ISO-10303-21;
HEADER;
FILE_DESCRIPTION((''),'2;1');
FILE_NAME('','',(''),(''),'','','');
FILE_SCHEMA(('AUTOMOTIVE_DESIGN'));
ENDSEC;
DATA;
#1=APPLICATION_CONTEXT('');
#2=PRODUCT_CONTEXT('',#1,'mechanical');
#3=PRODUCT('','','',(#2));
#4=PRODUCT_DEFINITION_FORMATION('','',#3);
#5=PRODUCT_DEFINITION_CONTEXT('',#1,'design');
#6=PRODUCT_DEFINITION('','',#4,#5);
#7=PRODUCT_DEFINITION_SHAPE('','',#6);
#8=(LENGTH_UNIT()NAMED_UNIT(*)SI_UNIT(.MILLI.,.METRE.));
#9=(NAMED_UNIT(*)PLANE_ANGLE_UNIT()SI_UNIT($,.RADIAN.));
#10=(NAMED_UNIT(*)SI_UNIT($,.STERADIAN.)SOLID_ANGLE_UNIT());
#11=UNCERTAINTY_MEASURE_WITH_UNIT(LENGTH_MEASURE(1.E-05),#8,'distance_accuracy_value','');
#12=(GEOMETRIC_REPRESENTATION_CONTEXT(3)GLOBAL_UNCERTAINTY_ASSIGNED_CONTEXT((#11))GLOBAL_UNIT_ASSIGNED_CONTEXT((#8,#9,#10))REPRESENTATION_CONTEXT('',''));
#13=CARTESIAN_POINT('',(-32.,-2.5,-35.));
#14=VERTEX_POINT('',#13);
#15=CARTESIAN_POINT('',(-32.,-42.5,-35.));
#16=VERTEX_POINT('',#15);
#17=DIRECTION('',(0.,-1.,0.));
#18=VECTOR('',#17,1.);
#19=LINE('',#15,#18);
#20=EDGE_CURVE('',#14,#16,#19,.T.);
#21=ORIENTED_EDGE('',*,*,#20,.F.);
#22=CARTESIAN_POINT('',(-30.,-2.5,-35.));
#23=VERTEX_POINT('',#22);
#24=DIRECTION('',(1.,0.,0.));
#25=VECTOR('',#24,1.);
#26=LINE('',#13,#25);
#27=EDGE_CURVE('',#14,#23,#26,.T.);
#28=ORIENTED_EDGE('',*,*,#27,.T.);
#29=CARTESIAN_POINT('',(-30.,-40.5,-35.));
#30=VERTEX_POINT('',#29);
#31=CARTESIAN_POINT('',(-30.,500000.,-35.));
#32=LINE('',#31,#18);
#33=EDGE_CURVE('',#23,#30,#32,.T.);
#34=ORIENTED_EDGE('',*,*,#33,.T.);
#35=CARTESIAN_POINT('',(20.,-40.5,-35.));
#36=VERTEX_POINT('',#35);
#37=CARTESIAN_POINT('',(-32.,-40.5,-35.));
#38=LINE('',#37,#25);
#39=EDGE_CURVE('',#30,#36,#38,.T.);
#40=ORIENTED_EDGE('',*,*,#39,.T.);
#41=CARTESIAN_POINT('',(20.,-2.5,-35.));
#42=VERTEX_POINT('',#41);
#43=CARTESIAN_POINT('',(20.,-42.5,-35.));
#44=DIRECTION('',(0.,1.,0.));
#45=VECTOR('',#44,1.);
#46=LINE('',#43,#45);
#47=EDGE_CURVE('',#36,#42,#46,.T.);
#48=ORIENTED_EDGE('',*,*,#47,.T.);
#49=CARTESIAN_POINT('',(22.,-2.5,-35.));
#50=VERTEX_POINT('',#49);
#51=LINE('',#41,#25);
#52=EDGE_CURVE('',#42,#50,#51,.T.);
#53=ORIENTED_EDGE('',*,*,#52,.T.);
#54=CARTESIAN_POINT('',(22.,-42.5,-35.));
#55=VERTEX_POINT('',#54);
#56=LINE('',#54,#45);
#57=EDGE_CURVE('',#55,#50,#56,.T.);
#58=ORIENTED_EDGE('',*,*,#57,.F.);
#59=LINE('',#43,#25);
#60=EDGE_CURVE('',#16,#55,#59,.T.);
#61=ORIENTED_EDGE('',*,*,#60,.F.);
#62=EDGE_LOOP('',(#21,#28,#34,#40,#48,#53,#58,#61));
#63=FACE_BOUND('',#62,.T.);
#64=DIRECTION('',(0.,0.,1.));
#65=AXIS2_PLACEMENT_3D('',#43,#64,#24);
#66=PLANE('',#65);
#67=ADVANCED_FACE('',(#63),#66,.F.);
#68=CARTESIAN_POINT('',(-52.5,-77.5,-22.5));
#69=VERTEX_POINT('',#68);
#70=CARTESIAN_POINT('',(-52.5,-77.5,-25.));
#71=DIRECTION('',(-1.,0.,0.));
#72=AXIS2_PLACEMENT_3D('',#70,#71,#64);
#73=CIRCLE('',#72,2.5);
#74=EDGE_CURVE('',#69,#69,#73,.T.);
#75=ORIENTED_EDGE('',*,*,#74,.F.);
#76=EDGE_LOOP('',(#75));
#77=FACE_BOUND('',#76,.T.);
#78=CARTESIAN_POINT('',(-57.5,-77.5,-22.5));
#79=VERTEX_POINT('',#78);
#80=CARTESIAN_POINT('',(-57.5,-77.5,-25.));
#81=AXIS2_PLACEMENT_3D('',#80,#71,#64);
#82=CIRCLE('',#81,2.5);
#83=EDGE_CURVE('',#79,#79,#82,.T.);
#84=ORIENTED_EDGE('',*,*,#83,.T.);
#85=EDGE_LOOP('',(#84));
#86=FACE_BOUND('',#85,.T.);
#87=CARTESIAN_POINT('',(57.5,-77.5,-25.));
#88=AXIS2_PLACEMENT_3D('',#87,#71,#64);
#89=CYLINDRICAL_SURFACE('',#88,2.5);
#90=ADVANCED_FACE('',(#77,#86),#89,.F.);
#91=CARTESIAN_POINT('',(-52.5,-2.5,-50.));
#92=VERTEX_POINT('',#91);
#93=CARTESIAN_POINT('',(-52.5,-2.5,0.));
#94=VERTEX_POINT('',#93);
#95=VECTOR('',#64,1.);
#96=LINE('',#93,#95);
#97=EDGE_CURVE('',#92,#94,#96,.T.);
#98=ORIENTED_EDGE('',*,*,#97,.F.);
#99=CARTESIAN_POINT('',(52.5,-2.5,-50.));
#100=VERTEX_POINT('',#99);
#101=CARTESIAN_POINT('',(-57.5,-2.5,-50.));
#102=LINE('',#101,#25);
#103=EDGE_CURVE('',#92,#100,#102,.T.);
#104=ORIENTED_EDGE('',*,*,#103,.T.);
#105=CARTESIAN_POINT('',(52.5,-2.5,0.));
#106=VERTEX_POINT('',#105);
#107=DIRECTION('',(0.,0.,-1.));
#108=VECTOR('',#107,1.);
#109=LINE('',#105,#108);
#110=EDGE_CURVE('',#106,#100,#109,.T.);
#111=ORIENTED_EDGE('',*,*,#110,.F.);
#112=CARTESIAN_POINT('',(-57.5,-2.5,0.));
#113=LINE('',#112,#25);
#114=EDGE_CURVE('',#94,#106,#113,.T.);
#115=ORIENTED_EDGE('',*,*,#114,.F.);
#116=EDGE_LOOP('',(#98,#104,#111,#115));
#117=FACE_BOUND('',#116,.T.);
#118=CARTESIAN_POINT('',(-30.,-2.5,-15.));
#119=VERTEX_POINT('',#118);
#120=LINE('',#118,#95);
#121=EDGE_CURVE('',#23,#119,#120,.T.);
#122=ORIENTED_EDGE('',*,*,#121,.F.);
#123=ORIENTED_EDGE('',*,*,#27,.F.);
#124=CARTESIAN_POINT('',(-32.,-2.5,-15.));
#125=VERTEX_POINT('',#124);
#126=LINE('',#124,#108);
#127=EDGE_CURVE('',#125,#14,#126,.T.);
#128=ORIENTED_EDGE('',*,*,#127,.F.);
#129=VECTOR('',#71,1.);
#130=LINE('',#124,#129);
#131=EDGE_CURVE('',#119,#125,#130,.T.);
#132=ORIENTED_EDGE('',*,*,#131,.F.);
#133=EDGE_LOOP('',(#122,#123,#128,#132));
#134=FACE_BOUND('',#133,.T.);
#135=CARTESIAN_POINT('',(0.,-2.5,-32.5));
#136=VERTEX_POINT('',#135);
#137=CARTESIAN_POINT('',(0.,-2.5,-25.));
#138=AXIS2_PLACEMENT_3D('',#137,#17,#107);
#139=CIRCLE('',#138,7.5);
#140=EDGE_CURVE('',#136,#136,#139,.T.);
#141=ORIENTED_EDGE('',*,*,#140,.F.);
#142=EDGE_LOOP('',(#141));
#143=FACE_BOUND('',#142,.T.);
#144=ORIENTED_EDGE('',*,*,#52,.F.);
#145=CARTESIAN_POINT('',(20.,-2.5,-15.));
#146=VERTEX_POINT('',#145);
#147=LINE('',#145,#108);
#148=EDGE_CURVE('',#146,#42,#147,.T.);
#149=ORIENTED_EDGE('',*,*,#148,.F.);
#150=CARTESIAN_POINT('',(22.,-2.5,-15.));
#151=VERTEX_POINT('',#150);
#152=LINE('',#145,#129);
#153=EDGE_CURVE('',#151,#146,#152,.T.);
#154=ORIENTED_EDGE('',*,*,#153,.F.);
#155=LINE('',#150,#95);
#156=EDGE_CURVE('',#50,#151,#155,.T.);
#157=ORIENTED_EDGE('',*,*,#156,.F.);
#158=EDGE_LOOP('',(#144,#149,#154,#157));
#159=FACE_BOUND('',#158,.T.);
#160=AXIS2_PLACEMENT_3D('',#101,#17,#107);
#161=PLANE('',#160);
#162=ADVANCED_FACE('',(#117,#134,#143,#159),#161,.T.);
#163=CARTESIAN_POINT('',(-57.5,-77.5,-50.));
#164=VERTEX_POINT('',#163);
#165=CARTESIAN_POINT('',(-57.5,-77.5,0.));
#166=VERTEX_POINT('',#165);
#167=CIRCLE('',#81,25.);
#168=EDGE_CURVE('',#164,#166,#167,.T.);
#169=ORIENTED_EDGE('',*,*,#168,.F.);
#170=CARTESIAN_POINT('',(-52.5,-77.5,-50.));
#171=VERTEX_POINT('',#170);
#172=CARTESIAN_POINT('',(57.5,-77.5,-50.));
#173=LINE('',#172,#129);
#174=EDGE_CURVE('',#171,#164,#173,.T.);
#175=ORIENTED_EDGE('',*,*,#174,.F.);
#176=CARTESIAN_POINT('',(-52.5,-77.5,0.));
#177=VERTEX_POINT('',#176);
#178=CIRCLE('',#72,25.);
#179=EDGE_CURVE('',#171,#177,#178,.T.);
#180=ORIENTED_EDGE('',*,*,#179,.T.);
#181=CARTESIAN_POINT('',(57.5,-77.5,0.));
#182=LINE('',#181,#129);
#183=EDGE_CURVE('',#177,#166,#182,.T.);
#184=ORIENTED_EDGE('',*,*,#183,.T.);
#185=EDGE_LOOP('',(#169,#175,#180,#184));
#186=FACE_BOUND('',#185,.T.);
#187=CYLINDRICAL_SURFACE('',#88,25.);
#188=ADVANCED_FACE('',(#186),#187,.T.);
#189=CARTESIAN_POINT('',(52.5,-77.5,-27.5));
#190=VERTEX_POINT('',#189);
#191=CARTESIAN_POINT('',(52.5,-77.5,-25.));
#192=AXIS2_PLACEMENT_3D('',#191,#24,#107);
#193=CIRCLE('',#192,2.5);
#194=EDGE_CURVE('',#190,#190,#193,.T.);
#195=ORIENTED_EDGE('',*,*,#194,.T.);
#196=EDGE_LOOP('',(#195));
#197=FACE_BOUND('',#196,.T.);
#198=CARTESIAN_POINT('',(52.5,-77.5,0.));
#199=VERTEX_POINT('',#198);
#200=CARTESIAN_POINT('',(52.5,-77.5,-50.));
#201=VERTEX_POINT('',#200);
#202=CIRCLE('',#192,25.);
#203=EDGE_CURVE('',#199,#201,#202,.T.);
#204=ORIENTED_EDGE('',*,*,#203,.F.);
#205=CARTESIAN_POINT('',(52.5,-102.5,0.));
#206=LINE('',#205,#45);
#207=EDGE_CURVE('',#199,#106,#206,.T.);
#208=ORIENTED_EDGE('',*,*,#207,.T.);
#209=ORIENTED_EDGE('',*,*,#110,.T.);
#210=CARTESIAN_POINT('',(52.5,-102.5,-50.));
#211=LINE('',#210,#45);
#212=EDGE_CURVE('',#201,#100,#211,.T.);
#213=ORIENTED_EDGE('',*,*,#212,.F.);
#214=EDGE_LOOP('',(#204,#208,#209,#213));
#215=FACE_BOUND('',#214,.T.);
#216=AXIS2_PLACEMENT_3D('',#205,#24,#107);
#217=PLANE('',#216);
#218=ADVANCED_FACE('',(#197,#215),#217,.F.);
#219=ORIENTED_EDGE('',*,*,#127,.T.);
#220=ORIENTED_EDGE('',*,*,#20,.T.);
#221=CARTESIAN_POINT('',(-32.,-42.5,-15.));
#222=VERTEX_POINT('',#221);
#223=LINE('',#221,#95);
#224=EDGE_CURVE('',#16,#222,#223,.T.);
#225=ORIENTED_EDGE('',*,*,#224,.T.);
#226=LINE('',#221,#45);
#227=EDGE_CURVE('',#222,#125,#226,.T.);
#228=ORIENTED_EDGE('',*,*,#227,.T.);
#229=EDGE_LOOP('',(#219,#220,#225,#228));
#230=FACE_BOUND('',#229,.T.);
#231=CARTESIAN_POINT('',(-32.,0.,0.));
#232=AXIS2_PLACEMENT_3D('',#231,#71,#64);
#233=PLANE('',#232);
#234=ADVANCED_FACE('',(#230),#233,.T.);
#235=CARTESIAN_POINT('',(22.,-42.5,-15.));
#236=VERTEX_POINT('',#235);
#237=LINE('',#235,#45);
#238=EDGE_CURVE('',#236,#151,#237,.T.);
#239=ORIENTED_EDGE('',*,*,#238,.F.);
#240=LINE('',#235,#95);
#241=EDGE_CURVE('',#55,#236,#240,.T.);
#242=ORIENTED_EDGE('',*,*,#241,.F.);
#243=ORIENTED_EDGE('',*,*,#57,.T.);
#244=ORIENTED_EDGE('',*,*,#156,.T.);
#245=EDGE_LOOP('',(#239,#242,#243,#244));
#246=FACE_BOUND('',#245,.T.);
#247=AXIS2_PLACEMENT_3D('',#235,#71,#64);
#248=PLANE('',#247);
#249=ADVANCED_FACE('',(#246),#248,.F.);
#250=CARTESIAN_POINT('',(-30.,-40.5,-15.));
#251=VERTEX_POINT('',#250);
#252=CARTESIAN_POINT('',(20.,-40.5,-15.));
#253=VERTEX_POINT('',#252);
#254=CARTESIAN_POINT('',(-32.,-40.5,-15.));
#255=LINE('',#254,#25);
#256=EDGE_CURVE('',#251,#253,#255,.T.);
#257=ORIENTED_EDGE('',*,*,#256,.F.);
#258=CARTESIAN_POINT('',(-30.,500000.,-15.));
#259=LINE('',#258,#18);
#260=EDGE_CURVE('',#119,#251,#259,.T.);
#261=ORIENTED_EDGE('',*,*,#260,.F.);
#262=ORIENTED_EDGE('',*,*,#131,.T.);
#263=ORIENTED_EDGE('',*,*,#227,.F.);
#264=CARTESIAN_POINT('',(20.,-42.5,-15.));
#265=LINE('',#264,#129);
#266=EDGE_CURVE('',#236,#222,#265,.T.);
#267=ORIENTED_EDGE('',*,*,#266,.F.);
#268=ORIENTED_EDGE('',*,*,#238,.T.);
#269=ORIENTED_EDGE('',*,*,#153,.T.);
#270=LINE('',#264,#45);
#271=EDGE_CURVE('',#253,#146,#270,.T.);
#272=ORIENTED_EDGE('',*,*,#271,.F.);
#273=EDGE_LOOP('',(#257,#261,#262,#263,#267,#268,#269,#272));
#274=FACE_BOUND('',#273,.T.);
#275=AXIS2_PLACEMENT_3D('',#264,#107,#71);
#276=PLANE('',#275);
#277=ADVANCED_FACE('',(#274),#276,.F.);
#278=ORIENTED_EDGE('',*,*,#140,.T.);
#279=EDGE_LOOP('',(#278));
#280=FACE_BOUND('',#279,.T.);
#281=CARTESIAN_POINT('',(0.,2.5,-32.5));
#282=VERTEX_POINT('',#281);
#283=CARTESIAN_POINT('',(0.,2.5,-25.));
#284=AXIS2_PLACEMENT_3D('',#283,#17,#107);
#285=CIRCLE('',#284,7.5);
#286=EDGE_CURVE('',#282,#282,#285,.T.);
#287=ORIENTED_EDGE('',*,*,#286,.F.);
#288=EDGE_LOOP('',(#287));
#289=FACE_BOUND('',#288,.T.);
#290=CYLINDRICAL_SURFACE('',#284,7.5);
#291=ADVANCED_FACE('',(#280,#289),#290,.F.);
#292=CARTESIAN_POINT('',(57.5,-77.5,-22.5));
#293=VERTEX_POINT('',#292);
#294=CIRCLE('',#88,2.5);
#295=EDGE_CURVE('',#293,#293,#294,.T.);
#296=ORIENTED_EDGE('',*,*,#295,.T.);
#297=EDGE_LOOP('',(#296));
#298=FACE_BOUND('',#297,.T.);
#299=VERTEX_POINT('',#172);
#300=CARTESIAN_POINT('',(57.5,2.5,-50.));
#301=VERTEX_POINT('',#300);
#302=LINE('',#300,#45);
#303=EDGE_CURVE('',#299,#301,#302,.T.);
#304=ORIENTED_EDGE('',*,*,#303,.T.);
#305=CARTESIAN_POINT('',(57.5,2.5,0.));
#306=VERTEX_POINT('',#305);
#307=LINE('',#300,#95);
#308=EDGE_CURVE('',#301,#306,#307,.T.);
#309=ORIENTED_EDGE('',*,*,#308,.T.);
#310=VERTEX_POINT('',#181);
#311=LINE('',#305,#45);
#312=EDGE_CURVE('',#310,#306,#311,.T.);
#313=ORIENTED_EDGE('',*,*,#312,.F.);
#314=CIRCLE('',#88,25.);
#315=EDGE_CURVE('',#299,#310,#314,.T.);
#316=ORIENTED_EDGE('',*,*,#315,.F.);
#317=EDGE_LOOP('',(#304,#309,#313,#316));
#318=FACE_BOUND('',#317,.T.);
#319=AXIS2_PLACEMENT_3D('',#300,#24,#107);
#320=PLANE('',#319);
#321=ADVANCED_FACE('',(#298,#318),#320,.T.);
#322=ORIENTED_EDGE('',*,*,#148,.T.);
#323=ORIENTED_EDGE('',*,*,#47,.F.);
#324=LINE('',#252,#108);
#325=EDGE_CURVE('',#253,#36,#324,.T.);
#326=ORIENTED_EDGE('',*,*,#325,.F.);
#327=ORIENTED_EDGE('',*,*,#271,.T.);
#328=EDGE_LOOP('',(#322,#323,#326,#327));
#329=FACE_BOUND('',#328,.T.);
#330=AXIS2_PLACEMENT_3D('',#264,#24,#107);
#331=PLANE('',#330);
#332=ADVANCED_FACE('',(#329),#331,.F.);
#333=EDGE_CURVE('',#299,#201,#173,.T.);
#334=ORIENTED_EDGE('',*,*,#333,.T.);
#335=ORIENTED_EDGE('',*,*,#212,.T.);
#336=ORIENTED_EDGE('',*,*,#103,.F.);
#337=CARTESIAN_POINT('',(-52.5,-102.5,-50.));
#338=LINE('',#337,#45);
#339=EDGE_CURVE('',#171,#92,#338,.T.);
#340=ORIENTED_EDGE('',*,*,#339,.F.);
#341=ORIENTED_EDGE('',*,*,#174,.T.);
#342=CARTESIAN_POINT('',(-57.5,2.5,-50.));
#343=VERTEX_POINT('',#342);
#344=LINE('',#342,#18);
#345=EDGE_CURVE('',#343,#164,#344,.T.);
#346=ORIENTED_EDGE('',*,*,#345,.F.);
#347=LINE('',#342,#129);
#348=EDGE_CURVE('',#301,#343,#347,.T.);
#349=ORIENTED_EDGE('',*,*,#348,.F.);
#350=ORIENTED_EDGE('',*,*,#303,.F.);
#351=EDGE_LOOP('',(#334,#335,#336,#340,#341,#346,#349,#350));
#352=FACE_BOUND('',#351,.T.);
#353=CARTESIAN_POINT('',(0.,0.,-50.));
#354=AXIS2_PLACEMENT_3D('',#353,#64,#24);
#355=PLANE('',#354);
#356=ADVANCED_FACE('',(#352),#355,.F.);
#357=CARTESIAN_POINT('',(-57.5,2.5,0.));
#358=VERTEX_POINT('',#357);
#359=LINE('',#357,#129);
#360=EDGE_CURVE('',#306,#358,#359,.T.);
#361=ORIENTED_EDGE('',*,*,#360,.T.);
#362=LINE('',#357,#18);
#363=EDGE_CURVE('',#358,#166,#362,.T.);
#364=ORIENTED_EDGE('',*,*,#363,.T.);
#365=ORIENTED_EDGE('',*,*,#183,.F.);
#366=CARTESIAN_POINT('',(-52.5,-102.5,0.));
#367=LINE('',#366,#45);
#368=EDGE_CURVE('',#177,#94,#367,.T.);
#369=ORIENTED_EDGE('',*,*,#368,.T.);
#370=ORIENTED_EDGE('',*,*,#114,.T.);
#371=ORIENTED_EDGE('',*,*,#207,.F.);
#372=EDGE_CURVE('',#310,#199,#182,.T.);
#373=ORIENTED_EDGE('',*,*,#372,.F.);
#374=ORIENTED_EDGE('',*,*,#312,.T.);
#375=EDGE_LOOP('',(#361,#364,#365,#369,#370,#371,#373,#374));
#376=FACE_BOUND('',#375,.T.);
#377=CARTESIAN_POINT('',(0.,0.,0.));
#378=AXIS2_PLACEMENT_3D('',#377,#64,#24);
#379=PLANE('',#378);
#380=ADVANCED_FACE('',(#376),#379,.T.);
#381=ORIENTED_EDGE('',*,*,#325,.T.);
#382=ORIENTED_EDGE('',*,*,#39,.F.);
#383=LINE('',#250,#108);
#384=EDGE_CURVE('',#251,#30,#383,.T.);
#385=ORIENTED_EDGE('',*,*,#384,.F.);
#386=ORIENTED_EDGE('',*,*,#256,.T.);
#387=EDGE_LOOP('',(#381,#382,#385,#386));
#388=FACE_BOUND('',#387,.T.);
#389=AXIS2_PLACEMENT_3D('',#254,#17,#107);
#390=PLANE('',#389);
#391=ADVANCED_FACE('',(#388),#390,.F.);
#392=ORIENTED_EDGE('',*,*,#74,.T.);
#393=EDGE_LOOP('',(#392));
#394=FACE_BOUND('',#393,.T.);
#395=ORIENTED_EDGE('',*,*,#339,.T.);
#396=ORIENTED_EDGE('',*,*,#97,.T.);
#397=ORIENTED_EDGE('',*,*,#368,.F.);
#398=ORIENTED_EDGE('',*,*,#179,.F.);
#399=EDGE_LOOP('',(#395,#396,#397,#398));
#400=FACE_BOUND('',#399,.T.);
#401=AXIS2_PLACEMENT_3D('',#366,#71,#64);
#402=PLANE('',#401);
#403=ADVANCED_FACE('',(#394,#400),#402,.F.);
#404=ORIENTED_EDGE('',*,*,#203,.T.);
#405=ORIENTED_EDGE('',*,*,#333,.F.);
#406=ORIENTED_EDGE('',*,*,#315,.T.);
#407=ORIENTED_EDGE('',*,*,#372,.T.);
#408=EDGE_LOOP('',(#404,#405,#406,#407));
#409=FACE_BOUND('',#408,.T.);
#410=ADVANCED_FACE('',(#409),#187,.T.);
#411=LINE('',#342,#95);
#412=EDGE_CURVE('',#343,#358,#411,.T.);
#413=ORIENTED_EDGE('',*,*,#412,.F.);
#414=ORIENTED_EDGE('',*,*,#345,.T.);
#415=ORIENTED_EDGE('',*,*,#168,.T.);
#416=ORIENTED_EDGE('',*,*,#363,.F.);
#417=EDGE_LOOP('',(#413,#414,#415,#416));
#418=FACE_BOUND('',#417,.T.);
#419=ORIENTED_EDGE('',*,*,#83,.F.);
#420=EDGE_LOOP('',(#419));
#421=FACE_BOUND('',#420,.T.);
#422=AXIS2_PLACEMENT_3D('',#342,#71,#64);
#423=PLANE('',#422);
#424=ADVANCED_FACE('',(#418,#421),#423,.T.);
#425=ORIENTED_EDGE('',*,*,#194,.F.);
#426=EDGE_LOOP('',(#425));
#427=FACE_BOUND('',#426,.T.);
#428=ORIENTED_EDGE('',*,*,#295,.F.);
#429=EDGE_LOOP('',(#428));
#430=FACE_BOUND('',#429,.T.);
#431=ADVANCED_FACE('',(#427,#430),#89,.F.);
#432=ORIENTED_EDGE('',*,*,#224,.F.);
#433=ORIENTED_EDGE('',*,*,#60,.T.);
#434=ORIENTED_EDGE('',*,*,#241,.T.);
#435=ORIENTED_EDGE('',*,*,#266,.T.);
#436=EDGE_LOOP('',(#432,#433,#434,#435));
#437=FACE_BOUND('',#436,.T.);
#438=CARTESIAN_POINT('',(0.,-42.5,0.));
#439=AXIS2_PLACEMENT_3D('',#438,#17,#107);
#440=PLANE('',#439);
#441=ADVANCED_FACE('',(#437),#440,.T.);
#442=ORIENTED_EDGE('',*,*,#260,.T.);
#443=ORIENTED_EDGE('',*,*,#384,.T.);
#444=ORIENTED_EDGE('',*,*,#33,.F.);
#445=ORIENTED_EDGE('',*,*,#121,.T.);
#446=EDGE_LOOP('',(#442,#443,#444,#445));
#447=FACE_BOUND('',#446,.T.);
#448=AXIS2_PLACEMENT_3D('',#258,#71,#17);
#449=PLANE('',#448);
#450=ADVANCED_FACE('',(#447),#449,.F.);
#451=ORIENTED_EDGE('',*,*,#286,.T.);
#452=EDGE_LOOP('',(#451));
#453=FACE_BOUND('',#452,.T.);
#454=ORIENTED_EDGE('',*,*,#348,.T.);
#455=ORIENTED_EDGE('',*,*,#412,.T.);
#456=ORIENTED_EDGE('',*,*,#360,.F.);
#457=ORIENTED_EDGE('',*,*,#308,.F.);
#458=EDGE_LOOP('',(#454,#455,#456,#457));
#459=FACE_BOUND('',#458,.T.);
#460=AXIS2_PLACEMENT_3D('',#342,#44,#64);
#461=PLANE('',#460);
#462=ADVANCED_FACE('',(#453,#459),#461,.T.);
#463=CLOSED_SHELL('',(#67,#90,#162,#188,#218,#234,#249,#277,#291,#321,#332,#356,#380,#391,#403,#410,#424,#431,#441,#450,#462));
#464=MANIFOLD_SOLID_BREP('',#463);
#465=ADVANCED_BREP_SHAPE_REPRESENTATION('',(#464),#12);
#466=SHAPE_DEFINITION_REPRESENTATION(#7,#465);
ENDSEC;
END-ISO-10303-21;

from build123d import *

# Parameters (mm, degrees)
SKETCH2_W              = 115
SKETCH2_H              = 5
BOSS_EXTRUDE1_DEPTH    = 50
SKETCH3_W              = 5
SKETCH3_H              = 50
BOSS_EXTRUDE2_DEPTH    = 100
CUT_EXTRUDE1_DEPTH     = 162.960643367
SKETCH5_R              = 2.5
CUT_EXTRUDE2_DEPTH     = 162.960643367
CUT_EXTRUDE3_START     = -5
CUT_EXTRUDE3_OUTLINE_R = 7.5
CUT_EXTRUDE3_DEPTH     = 5
SKETCH7_W              = 2
SKETCH7_H              = 20
BOSS_EXTRUDE3_DEPTH    = 40
SKETCH8_W              = 20
SKETCH8_H              = 2
BOSS_EXTRUDE4_DEPTH    = 52
BOSS_EXTRUDE6_REACH    = 100.236
SKETCH9_W              = 2
SKETCH9_H              = 20


# Read off the part's stored shape, not the designer's step: Cut-Extrude3
with BuildPart() as part:
    # Sketch2 → Boss-Extrude1 (new body)
    with BuildSketch(Plane.XY):
        Rectangle(SKETCH2_W, SKETCH2_H)
    extrude(amount=-BOSS_EXTRUDE1_DEPTH)

    # Sketch3 → Boss-Extrude2 (add)
    with BuildSketch(Plane.XZ.offset(2.5)):
        with Locations((-55, -25)):
            Rectangle(SKETCH3_W, SKETCH3_H)
        with Locations((55, -25)):
            Rectangle(SKETCH3_W, SKETCH3_H)
    extrude(amount=BOSS_EXTRUDE2_DEPTH)

    # Sketch4 → Cut-Extrude1 (cut, through all)
    with BuildSketch(Plane.ZY.offset(57.5)):
        with BuildLine():
            Line((0, -102.5), (0, -77.5))
            ThreePointArc((0, -77.5), (-7.32233047, -95.17766953), (-25, -102.5))
            Line((-25, -102.5), (0, -102.5))
        make_face()
        with BuildLine():
            ThreePointArc((-25, -102.5), (-42.67766953, -95.17766953), (-50, -77.5))
            Line((-50, -77.5), (-50, -102.5))
            Line((-50, -102.5), (-25, -102.5))
        make_face()
    extrude(amount=-CUT_EXTRUDE1_DEPTH, mode=Mode.SUBTRACT)

    # Sketch5 → Cut-Extrude2 (cut, through all)
    with BuildSketch(Plane.ZY.offset(57.5)):
        with Locations((-25, -77.5)):
            Circle(SKETCH5_R)
    extrude(amount=-CUT_EXTRUDE2_DEPTH, mode=Mode.SUBTRACT)

    # Cut-Extrude3 outline → Cut-Extrude3 (cut)
    with BuildSketch(Plane.XZ.offset(2.5).offset(CUT_EXTRUDE3_START)):
        with Locations((0, -25)):
            Circle(CUT_EXTRUDE3_OUTLINE_R)
    extrude(amount=CUT_EXTRUDE3_DEPTH, mode=Mode.SUBTRACT)

    # Sketch7 → Boss-Extrude3 (add)
    with BuildSketch(Plane.XZ.offset(2.5)):
        with Locations((21, -25)):
            Rectangle(SKETCH7_W, SKETCH7_H)
    extrude(amount=BOSS_EXTRUDE3_DEPTH)

    # Sketch8 → Boss-Extrude4 (add)
    with BuildSketch(Plane.ZY.offset(-20)):
        with Locations((-25, -41.5)):
            Rectangle(SKETCH8_W, SKETCH8_H)
    extrude(amount=BOSS_EXTRUDE4_DEPTH)

    # Sketch9 → Boss-Extrude6 (add, up to next)
    with BuildSketch(Plane(origin=(0, -40.5, 0), x_dir=(1, 0, 0), z_dir=(0, 1, 0)), mode=Mode.PRIVATE) as boss_extrude6_sk1:
        with Locations((-31, 25)):
            Rectangle(SKETCH9_W, SKETCH9_H)
    boss_extrude6_tool1 = extrude(boss_extrude6_sk1.sketch, amount=BOSS_EXTRUDE6_REACH, mode=Mode.PRIVATE) - part.part
    add(boss_extrude6_tool1.solids().sort_by_distance((-31, -40.5, -25))[0])


solid = part.part
